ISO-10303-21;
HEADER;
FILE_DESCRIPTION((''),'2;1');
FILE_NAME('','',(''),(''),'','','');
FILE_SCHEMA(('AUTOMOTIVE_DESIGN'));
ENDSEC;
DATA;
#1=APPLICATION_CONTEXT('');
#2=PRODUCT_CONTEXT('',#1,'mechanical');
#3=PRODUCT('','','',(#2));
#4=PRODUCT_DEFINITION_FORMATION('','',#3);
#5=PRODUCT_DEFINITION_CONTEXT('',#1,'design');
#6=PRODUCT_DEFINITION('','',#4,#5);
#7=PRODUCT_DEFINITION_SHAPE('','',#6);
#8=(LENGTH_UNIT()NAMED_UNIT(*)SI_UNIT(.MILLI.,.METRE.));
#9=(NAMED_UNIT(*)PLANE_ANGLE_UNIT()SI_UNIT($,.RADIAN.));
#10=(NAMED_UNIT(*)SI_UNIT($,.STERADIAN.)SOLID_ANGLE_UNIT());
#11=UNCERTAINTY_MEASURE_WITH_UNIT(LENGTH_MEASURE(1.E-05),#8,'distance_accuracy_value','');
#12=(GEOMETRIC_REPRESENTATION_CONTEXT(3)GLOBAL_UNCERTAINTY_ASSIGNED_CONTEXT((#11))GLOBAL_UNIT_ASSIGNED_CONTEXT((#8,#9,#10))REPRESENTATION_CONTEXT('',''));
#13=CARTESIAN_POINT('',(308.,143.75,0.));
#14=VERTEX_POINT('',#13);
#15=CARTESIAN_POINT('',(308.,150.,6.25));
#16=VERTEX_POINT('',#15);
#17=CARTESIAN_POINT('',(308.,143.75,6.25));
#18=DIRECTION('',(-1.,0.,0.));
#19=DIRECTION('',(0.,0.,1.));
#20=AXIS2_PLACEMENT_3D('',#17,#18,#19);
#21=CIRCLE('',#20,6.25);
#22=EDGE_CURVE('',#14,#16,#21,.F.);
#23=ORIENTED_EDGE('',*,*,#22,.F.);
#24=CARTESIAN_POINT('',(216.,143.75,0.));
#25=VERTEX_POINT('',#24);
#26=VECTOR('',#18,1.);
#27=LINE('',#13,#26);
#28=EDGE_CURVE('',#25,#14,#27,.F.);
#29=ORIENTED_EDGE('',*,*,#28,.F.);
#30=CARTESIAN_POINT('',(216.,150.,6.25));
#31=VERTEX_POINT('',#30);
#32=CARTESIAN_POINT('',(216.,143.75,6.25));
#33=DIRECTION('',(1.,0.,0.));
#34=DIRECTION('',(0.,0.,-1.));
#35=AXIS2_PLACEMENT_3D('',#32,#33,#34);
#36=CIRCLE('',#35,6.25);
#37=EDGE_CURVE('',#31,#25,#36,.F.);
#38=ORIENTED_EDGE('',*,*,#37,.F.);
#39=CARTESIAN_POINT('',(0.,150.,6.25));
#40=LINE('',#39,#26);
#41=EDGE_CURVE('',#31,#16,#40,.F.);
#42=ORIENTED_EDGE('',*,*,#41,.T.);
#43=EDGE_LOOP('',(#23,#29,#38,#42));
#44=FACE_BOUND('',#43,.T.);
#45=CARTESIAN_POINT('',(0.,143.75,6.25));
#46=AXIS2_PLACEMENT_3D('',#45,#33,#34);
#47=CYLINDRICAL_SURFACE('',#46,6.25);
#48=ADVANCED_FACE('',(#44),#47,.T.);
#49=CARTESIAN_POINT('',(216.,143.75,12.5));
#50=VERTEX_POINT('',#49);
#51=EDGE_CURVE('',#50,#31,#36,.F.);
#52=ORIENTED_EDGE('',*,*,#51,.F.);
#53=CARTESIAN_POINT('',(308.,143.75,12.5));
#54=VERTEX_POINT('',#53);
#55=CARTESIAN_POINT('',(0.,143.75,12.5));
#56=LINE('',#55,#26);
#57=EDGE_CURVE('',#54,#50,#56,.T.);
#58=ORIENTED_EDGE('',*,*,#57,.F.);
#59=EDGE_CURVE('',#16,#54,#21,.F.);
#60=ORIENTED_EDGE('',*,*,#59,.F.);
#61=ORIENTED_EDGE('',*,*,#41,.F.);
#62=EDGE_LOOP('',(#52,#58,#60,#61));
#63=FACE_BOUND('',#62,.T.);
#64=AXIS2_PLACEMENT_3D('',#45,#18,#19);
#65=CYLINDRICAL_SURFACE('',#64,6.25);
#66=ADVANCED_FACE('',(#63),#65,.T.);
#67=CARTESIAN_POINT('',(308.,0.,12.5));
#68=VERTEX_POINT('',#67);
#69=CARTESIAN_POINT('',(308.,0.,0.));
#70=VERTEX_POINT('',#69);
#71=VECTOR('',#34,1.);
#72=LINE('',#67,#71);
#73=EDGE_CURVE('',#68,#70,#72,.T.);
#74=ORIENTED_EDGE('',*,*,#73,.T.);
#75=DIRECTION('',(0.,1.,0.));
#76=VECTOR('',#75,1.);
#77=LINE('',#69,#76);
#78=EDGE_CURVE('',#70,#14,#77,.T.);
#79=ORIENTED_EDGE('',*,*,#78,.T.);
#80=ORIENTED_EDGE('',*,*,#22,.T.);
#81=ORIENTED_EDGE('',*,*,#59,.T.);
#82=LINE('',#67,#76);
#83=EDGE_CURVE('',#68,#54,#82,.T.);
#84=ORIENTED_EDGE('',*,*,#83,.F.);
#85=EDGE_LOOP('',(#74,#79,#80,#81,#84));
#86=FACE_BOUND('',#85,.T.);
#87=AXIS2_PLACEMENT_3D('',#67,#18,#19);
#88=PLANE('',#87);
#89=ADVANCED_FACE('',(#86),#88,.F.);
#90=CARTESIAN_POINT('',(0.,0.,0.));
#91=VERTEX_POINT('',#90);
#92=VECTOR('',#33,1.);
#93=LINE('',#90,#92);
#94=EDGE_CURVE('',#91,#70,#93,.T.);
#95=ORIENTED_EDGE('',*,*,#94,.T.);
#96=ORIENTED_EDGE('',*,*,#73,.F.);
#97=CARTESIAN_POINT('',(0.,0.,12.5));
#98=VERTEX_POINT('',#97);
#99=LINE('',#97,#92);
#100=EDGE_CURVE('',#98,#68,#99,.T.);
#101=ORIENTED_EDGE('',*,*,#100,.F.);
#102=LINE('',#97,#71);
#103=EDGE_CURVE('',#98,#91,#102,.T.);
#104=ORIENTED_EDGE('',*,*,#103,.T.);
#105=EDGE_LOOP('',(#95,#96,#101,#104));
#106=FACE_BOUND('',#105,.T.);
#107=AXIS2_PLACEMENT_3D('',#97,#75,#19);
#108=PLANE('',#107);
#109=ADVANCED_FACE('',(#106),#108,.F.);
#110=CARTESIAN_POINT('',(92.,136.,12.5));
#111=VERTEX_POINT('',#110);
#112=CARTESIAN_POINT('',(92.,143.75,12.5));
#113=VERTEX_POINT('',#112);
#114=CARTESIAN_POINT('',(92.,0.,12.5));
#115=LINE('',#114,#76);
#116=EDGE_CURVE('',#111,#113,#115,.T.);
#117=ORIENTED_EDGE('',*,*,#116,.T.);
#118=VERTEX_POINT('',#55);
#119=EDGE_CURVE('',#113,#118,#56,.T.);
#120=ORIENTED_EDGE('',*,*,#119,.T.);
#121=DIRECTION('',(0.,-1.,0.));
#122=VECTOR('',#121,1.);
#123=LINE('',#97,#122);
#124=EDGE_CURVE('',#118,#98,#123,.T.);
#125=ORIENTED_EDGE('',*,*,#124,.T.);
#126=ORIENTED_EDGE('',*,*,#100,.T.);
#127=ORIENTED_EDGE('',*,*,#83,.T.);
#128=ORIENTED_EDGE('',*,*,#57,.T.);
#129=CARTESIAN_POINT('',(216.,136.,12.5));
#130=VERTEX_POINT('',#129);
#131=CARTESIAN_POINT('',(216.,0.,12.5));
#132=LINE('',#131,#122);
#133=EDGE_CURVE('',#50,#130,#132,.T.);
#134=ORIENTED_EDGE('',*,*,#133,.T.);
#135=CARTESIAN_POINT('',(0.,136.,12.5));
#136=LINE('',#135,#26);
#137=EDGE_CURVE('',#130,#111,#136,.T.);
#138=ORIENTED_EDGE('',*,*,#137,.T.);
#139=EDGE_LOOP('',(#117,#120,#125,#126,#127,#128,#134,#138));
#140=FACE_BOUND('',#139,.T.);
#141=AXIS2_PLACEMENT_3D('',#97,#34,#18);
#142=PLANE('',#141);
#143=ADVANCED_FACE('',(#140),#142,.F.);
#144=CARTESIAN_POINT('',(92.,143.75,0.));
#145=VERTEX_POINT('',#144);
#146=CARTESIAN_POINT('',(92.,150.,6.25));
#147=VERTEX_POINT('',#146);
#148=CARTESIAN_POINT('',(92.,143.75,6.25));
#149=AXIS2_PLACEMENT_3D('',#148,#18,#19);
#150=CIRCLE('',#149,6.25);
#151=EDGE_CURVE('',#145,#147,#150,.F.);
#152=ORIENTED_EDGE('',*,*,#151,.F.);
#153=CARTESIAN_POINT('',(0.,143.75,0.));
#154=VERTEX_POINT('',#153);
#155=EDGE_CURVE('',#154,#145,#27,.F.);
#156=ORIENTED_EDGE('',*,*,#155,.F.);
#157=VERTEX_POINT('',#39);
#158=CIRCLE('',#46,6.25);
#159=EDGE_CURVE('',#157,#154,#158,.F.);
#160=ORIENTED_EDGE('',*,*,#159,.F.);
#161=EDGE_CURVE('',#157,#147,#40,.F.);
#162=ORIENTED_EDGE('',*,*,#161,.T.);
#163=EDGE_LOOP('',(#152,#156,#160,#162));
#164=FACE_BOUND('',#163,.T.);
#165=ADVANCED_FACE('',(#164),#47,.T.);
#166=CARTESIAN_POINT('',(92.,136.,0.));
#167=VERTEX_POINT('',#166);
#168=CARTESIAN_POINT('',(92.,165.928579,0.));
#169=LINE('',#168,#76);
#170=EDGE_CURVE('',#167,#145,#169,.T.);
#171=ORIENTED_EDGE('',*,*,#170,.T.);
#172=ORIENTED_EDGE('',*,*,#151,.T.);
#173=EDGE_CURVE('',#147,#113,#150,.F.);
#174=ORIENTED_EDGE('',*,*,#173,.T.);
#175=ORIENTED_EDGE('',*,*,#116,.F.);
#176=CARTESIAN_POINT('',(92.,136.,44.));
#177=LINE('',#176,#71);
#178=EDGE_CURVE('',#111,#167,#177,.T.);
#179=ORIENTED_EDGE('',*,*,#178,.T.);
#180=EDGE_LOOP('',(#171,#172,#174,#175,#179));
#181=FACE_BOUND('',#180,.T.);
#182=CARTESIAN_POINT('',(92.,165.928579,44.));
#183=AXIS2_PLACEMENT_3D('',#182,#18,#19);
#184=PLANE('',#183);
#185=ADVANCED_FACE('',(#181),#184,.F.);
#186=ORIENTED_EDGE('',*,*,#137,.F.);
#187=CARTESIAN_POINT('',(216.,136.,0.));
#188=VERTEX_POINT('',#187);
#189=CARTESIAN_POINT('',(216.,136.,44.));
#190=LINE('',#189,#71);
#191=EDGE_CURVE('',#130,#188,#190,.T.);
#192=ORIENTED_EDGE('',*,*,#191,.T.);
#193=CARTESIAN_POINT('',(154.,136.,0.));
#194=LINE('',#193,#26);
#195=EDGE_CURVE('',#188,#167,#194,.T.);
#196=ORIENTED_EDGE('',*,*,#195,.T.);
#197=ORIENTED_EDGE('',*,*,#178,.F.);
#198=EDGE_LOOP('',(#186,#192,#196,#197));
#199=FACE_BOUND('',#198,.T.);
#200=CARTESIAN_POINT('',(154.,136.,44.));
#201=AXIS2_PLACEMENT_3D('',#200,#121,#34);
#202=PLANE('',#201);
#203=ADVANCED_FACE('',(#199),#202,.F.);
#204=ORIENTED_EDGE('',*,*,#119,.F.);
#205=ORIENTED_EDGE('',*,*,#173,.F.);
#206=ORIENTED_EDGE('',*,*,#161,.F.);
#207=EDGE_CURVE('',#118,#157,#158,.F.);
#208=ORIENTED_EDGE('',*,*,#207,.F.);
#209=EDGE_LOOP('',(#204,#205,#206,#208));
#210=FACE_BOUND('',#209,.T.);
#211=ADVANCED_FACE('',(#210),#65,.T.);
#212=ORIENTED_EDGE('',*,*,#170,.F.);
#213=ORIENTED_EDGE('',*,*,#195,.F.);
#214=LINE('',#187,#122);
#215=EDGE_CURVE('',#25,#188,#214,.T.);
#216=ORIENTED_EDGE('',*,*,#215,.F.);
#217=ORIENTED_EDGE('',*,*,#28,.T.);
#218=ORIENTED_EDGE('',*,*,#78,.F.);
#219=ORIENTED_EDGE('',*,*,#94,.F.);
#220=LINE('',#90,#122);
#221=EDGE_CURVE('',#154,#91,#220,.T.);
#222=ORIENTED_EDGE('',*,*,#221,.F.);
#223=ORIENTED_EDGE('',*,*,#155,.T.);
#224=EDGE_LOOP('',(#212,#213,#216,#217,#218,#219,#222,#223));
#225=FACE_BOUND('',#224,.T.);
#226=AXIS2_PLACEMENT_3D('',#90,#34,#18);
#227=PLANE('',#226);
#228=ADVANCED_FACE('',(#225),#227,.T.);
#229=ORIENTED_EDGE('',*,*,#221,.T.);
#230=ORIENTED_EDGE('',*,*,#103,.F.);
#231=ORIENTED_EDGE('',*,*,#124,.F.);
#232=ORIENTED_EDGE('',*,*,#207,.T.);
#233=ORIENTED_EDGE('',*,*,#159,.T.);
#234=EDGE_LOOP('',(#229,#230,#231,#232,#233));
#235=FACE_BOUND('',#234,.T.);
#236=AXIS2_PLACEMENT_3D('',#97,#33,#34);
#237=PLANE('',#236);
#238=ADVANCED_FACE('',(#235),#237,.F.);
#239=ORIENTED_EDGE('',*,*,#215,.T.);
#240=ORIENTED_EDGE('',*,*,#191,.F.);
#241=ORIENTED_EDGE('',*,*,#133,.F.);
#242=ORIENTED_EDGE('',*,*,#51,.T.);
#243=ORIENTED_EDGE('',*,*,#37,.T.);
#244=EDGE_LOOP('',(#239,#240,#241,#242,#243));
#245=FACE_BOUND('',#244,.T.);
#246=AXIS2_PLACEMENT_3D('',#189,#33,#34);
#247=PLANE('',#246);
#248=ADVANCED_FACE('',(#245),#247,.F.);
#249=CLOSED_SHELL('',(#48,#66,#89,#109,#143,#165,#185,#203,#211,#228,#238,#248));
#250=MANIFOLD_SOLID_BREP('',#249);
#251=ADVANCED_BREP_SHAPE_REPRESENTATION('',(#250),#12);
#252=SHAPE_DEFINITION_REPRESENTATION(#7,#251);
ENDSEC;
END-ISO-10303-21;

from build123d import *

# Parameters (mm, degrees)
SKETCH_1_W          = 308
SKETCH_1_H          = 150
EXTRUDE_1_DEPTH     = 12.5
FILLET_1_R          = 6.25
FILLET_2_R          = 6.25
CUT_EXTRUDE_1_DEPTH = 44


with BuildPart() as part:
    # 草图1 → 凸台-拉伸1 (new body)
    with BuildSketch(Plane.XY):
        with Locations((154, 75)):
            Rectangle(SKETCH_1_W, SKETCH_1_H)
    extrude(amount=EXTRUDE_1_DEPTH)

    # 圆角1
    fillet_1_edges = [part.edges().sort_by_distance(p)[0] for p in [
        (154, 150, 12.5),
    ]]
    fillet(fillet_1_edges, radius=FILLET_1_R)

    # 圆角2
    fillet_2_edges = [part.edges().sort_by_distance(p)[0] for p in [
        (154, 150, 0),
    ]]
    fillet(fillet_2_edges, radius=FILLET_2_R - 0.0001)  # a hair under: the kernel refuses the full size

    # 草图2 → 切除-拉伸1 (cut)
    with BuildSketch(Plane(origin=(0, 0, 0), x_dir=(-1, 0, 0), z_dir=(0, 0, -1))):
        Polygon((-154, 136), (-92, 136), (-92, 165.928579256), (-216, 165.928579256), (-216, 136), align=None)
    extrude(amount=-CUT_EXTRUDE_1_DEPTH, mode=Mode.SUBTRACT)


solid = part.part
